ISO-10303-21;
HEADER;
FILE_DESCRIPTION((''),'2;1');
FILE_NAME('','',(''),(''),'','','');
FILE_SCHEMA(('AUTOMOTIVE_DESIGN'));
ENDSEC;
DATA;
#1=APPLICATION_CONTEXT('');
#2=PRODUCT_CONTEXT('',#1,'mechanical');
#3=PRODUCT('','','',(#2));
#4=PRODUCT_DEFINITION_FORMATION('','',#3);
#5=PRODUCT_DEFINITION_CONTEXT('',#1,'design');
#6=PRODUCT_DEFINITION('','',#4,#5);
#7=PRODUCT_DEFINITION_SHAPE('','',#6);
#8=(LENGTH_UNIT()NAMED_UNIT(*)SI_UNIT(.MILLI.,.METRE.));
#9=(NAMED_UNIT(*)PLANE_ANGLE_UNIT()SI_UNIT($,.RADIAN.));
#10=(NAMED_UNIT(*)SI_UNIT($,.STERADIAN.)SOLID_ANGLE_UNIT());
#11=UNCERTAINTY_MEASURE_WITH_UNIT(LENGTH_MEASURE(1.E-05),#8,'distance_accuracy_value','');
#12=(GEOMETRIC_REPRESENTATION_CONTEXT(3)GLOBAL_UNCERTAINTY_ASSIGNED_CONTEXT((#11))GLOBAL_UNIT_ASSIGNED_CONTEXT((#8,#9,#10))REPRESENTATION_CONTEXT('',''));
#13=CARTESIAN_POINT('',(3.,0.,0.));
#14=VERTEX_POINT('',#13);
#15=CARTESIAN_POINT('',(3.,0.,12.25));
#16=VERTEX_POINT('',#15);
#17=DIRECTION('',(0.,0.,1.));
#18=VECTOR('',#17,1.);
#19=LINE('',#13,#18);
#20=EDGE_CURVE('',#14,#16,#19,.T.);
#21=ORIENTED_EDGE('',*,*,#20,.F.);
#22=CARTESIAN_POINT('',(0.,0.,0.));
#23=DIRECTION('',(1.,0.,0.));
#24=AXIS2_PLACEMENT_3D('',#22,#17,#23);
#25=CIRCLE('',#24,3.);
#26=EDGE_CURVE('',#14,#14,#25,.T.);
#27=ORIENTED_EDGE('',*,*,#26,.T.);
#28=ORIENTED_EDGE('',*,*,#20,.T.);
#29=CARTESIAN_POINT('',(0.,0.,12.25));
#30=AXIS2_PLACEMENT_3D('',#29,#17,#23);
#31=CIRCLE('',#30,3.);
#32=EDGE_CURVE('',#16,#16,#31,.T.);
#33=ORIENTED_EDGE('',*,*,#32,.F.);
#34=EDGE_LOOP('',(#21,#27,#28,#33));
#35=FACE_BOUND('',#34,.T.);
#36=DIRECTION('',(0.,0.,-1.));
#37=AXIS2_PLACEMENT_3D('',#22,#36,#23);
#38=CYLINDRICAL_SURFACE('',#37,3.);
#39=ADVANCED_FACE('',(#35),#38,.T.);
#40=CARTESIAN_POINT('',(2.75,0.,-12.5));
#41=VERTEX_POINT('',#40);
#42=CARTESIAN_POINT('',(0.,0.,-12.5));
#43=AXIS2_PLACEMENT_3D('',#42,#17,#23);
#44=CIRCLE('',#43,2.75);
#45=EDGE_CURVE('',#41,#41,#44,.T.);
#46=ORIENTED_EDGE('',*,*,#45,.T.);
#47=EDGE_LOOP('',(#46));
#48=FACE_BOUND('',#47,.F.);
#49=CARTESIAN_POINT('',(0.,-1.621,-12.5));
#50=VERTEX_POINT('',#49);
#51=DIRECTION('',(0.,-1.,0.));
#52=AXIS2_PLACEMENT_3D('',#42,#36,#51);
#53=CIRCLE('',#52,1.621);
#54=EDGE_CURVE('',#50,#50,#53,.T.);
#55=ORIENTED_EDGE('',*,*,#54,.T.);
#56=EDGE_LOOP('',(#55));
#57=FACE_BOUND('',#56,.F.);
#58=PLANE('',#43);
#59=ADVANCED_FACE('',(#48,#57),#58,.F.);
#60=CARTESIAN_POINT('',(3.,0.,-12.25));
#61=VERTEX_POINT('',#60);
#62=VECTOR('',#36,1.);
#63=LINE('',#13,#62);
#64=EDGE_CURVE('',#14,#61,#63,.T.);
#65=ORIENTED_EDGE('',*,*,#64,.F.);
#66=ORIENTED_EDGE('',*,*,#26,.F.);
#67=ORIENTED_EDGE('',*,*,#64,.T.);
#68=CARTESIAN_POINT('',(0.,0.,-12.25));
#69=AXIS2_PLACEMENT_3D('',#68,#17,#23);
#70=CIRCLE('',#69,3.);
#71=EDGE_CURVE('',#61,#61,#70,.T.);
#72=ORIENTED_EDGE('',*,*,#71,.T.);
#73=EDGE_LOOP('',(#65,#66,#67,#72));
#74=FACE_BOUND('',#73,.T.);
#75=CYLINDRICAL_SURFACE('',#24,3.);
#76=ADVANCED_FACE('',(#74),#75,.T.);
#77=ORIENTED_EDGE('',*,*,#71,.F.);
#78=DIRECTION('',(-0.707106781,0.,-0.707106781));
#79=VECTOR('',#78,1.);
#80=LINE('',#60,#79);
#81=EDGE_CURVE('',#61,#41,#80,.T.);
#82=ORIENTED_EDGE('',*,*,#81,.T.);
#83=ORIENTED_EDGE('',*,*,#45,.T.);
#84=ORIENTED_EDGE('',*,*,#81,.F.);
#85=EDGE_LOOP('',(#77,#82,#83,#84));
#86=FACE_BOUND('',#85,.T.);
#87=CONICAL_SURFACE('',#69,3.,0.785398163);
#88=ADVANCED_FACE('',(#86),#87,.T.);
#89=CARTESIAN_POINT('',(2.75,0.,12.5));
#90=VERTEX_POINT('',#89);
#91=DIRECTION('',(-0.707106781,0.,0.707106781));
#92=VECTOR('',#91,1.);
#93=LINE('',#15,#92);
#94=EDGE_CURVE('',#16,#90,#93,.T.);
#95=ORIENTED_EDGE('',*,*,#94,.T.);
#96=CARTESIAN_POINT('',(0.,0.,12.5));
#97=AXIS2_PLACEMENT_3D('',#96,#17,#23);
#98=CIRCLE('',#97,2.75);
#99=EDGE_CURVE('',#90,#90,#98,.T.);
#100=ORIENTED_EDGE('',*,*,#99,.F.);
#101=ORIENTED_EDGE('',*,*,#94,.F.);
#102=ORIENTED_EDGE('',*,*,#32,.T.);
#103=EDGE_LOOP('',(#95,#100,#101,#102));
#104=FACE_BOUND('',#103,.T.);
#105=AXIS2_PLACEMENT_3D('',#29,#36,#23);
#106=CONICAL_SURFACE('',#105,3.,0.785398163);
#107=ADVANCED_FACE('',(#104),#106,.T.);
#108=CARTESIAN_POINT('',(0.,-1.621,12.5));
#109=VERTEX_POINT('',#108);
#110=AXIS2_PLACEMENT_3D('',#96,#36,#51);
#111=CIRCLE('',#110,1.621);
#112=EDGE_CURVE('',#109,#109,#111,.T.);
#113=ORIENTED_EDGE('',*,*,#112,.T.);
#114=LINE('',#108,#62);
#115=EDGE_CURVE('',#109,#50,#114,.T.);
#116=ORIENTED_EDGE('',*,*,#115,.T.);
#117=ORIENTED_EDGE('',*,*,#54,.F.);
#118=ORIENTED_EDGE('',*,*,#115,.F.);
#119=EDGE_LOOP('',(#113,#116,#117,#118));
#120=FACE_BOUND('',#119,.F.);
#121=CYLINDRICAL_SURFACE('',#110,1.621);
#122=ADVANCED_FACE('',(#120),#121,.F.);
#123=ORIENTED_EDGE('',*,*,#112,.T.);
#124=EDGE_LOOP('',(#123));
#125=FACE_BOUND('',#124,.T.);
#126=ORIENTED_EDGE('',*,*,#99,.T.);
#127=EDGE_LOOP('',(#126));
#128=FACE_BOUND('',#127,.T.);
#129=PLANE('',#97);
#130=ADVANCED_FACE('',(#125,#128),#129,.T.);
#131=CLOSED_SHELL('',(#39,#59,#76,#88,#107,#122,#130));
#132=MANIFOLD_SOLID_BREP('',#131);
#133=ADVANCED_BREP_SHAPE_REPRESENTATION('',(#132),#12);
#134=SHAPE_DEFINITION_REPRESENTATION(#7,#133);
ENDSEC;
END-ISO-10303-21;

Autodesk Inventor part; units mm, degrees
ref_plane "YZ Plane" through (0, 0, 0) normal (1, 0, 0) x (0, 1, 0)
ref_plane "XZ Plane" through (0, 0, 0) normal (0, 1, 0) x (-1, 0, 0)
ref_plane "XY Plane" through (0, 0, 0) normal (0, 0, 1) x (1, 0, 0)
sketch "Sketch1" plane through (0, 0, 0) normal (0, 0, 1) x (1, 0, 0)
  circle A0 centre (0, 0) radius 3
  dimension "d0" = 6
extrude "Extrusion1" add sketch "Sketch1" along normal mid plane 25
sketch "Sketch2" plane through (0, 0, 12.5) normal (0, 0, 1) x (1, 0, 0)
  point P0 (0, 0)
  point P1 (2.8235, 0.7984)
hole "Hole1" at (0, 0, 12.5) direction (0, 0, -1) diameter 3.242 end up to surface thread size "M4x0.7" class "6H" standard "ISO Metric profile"
chamfer "Chamfer1" distance 0.25 angle 45 2 edges at (-3, 0, 12.5) (-3, 0, -12.5)
properties part number "FootPin" material "Acetal Resin, White"
